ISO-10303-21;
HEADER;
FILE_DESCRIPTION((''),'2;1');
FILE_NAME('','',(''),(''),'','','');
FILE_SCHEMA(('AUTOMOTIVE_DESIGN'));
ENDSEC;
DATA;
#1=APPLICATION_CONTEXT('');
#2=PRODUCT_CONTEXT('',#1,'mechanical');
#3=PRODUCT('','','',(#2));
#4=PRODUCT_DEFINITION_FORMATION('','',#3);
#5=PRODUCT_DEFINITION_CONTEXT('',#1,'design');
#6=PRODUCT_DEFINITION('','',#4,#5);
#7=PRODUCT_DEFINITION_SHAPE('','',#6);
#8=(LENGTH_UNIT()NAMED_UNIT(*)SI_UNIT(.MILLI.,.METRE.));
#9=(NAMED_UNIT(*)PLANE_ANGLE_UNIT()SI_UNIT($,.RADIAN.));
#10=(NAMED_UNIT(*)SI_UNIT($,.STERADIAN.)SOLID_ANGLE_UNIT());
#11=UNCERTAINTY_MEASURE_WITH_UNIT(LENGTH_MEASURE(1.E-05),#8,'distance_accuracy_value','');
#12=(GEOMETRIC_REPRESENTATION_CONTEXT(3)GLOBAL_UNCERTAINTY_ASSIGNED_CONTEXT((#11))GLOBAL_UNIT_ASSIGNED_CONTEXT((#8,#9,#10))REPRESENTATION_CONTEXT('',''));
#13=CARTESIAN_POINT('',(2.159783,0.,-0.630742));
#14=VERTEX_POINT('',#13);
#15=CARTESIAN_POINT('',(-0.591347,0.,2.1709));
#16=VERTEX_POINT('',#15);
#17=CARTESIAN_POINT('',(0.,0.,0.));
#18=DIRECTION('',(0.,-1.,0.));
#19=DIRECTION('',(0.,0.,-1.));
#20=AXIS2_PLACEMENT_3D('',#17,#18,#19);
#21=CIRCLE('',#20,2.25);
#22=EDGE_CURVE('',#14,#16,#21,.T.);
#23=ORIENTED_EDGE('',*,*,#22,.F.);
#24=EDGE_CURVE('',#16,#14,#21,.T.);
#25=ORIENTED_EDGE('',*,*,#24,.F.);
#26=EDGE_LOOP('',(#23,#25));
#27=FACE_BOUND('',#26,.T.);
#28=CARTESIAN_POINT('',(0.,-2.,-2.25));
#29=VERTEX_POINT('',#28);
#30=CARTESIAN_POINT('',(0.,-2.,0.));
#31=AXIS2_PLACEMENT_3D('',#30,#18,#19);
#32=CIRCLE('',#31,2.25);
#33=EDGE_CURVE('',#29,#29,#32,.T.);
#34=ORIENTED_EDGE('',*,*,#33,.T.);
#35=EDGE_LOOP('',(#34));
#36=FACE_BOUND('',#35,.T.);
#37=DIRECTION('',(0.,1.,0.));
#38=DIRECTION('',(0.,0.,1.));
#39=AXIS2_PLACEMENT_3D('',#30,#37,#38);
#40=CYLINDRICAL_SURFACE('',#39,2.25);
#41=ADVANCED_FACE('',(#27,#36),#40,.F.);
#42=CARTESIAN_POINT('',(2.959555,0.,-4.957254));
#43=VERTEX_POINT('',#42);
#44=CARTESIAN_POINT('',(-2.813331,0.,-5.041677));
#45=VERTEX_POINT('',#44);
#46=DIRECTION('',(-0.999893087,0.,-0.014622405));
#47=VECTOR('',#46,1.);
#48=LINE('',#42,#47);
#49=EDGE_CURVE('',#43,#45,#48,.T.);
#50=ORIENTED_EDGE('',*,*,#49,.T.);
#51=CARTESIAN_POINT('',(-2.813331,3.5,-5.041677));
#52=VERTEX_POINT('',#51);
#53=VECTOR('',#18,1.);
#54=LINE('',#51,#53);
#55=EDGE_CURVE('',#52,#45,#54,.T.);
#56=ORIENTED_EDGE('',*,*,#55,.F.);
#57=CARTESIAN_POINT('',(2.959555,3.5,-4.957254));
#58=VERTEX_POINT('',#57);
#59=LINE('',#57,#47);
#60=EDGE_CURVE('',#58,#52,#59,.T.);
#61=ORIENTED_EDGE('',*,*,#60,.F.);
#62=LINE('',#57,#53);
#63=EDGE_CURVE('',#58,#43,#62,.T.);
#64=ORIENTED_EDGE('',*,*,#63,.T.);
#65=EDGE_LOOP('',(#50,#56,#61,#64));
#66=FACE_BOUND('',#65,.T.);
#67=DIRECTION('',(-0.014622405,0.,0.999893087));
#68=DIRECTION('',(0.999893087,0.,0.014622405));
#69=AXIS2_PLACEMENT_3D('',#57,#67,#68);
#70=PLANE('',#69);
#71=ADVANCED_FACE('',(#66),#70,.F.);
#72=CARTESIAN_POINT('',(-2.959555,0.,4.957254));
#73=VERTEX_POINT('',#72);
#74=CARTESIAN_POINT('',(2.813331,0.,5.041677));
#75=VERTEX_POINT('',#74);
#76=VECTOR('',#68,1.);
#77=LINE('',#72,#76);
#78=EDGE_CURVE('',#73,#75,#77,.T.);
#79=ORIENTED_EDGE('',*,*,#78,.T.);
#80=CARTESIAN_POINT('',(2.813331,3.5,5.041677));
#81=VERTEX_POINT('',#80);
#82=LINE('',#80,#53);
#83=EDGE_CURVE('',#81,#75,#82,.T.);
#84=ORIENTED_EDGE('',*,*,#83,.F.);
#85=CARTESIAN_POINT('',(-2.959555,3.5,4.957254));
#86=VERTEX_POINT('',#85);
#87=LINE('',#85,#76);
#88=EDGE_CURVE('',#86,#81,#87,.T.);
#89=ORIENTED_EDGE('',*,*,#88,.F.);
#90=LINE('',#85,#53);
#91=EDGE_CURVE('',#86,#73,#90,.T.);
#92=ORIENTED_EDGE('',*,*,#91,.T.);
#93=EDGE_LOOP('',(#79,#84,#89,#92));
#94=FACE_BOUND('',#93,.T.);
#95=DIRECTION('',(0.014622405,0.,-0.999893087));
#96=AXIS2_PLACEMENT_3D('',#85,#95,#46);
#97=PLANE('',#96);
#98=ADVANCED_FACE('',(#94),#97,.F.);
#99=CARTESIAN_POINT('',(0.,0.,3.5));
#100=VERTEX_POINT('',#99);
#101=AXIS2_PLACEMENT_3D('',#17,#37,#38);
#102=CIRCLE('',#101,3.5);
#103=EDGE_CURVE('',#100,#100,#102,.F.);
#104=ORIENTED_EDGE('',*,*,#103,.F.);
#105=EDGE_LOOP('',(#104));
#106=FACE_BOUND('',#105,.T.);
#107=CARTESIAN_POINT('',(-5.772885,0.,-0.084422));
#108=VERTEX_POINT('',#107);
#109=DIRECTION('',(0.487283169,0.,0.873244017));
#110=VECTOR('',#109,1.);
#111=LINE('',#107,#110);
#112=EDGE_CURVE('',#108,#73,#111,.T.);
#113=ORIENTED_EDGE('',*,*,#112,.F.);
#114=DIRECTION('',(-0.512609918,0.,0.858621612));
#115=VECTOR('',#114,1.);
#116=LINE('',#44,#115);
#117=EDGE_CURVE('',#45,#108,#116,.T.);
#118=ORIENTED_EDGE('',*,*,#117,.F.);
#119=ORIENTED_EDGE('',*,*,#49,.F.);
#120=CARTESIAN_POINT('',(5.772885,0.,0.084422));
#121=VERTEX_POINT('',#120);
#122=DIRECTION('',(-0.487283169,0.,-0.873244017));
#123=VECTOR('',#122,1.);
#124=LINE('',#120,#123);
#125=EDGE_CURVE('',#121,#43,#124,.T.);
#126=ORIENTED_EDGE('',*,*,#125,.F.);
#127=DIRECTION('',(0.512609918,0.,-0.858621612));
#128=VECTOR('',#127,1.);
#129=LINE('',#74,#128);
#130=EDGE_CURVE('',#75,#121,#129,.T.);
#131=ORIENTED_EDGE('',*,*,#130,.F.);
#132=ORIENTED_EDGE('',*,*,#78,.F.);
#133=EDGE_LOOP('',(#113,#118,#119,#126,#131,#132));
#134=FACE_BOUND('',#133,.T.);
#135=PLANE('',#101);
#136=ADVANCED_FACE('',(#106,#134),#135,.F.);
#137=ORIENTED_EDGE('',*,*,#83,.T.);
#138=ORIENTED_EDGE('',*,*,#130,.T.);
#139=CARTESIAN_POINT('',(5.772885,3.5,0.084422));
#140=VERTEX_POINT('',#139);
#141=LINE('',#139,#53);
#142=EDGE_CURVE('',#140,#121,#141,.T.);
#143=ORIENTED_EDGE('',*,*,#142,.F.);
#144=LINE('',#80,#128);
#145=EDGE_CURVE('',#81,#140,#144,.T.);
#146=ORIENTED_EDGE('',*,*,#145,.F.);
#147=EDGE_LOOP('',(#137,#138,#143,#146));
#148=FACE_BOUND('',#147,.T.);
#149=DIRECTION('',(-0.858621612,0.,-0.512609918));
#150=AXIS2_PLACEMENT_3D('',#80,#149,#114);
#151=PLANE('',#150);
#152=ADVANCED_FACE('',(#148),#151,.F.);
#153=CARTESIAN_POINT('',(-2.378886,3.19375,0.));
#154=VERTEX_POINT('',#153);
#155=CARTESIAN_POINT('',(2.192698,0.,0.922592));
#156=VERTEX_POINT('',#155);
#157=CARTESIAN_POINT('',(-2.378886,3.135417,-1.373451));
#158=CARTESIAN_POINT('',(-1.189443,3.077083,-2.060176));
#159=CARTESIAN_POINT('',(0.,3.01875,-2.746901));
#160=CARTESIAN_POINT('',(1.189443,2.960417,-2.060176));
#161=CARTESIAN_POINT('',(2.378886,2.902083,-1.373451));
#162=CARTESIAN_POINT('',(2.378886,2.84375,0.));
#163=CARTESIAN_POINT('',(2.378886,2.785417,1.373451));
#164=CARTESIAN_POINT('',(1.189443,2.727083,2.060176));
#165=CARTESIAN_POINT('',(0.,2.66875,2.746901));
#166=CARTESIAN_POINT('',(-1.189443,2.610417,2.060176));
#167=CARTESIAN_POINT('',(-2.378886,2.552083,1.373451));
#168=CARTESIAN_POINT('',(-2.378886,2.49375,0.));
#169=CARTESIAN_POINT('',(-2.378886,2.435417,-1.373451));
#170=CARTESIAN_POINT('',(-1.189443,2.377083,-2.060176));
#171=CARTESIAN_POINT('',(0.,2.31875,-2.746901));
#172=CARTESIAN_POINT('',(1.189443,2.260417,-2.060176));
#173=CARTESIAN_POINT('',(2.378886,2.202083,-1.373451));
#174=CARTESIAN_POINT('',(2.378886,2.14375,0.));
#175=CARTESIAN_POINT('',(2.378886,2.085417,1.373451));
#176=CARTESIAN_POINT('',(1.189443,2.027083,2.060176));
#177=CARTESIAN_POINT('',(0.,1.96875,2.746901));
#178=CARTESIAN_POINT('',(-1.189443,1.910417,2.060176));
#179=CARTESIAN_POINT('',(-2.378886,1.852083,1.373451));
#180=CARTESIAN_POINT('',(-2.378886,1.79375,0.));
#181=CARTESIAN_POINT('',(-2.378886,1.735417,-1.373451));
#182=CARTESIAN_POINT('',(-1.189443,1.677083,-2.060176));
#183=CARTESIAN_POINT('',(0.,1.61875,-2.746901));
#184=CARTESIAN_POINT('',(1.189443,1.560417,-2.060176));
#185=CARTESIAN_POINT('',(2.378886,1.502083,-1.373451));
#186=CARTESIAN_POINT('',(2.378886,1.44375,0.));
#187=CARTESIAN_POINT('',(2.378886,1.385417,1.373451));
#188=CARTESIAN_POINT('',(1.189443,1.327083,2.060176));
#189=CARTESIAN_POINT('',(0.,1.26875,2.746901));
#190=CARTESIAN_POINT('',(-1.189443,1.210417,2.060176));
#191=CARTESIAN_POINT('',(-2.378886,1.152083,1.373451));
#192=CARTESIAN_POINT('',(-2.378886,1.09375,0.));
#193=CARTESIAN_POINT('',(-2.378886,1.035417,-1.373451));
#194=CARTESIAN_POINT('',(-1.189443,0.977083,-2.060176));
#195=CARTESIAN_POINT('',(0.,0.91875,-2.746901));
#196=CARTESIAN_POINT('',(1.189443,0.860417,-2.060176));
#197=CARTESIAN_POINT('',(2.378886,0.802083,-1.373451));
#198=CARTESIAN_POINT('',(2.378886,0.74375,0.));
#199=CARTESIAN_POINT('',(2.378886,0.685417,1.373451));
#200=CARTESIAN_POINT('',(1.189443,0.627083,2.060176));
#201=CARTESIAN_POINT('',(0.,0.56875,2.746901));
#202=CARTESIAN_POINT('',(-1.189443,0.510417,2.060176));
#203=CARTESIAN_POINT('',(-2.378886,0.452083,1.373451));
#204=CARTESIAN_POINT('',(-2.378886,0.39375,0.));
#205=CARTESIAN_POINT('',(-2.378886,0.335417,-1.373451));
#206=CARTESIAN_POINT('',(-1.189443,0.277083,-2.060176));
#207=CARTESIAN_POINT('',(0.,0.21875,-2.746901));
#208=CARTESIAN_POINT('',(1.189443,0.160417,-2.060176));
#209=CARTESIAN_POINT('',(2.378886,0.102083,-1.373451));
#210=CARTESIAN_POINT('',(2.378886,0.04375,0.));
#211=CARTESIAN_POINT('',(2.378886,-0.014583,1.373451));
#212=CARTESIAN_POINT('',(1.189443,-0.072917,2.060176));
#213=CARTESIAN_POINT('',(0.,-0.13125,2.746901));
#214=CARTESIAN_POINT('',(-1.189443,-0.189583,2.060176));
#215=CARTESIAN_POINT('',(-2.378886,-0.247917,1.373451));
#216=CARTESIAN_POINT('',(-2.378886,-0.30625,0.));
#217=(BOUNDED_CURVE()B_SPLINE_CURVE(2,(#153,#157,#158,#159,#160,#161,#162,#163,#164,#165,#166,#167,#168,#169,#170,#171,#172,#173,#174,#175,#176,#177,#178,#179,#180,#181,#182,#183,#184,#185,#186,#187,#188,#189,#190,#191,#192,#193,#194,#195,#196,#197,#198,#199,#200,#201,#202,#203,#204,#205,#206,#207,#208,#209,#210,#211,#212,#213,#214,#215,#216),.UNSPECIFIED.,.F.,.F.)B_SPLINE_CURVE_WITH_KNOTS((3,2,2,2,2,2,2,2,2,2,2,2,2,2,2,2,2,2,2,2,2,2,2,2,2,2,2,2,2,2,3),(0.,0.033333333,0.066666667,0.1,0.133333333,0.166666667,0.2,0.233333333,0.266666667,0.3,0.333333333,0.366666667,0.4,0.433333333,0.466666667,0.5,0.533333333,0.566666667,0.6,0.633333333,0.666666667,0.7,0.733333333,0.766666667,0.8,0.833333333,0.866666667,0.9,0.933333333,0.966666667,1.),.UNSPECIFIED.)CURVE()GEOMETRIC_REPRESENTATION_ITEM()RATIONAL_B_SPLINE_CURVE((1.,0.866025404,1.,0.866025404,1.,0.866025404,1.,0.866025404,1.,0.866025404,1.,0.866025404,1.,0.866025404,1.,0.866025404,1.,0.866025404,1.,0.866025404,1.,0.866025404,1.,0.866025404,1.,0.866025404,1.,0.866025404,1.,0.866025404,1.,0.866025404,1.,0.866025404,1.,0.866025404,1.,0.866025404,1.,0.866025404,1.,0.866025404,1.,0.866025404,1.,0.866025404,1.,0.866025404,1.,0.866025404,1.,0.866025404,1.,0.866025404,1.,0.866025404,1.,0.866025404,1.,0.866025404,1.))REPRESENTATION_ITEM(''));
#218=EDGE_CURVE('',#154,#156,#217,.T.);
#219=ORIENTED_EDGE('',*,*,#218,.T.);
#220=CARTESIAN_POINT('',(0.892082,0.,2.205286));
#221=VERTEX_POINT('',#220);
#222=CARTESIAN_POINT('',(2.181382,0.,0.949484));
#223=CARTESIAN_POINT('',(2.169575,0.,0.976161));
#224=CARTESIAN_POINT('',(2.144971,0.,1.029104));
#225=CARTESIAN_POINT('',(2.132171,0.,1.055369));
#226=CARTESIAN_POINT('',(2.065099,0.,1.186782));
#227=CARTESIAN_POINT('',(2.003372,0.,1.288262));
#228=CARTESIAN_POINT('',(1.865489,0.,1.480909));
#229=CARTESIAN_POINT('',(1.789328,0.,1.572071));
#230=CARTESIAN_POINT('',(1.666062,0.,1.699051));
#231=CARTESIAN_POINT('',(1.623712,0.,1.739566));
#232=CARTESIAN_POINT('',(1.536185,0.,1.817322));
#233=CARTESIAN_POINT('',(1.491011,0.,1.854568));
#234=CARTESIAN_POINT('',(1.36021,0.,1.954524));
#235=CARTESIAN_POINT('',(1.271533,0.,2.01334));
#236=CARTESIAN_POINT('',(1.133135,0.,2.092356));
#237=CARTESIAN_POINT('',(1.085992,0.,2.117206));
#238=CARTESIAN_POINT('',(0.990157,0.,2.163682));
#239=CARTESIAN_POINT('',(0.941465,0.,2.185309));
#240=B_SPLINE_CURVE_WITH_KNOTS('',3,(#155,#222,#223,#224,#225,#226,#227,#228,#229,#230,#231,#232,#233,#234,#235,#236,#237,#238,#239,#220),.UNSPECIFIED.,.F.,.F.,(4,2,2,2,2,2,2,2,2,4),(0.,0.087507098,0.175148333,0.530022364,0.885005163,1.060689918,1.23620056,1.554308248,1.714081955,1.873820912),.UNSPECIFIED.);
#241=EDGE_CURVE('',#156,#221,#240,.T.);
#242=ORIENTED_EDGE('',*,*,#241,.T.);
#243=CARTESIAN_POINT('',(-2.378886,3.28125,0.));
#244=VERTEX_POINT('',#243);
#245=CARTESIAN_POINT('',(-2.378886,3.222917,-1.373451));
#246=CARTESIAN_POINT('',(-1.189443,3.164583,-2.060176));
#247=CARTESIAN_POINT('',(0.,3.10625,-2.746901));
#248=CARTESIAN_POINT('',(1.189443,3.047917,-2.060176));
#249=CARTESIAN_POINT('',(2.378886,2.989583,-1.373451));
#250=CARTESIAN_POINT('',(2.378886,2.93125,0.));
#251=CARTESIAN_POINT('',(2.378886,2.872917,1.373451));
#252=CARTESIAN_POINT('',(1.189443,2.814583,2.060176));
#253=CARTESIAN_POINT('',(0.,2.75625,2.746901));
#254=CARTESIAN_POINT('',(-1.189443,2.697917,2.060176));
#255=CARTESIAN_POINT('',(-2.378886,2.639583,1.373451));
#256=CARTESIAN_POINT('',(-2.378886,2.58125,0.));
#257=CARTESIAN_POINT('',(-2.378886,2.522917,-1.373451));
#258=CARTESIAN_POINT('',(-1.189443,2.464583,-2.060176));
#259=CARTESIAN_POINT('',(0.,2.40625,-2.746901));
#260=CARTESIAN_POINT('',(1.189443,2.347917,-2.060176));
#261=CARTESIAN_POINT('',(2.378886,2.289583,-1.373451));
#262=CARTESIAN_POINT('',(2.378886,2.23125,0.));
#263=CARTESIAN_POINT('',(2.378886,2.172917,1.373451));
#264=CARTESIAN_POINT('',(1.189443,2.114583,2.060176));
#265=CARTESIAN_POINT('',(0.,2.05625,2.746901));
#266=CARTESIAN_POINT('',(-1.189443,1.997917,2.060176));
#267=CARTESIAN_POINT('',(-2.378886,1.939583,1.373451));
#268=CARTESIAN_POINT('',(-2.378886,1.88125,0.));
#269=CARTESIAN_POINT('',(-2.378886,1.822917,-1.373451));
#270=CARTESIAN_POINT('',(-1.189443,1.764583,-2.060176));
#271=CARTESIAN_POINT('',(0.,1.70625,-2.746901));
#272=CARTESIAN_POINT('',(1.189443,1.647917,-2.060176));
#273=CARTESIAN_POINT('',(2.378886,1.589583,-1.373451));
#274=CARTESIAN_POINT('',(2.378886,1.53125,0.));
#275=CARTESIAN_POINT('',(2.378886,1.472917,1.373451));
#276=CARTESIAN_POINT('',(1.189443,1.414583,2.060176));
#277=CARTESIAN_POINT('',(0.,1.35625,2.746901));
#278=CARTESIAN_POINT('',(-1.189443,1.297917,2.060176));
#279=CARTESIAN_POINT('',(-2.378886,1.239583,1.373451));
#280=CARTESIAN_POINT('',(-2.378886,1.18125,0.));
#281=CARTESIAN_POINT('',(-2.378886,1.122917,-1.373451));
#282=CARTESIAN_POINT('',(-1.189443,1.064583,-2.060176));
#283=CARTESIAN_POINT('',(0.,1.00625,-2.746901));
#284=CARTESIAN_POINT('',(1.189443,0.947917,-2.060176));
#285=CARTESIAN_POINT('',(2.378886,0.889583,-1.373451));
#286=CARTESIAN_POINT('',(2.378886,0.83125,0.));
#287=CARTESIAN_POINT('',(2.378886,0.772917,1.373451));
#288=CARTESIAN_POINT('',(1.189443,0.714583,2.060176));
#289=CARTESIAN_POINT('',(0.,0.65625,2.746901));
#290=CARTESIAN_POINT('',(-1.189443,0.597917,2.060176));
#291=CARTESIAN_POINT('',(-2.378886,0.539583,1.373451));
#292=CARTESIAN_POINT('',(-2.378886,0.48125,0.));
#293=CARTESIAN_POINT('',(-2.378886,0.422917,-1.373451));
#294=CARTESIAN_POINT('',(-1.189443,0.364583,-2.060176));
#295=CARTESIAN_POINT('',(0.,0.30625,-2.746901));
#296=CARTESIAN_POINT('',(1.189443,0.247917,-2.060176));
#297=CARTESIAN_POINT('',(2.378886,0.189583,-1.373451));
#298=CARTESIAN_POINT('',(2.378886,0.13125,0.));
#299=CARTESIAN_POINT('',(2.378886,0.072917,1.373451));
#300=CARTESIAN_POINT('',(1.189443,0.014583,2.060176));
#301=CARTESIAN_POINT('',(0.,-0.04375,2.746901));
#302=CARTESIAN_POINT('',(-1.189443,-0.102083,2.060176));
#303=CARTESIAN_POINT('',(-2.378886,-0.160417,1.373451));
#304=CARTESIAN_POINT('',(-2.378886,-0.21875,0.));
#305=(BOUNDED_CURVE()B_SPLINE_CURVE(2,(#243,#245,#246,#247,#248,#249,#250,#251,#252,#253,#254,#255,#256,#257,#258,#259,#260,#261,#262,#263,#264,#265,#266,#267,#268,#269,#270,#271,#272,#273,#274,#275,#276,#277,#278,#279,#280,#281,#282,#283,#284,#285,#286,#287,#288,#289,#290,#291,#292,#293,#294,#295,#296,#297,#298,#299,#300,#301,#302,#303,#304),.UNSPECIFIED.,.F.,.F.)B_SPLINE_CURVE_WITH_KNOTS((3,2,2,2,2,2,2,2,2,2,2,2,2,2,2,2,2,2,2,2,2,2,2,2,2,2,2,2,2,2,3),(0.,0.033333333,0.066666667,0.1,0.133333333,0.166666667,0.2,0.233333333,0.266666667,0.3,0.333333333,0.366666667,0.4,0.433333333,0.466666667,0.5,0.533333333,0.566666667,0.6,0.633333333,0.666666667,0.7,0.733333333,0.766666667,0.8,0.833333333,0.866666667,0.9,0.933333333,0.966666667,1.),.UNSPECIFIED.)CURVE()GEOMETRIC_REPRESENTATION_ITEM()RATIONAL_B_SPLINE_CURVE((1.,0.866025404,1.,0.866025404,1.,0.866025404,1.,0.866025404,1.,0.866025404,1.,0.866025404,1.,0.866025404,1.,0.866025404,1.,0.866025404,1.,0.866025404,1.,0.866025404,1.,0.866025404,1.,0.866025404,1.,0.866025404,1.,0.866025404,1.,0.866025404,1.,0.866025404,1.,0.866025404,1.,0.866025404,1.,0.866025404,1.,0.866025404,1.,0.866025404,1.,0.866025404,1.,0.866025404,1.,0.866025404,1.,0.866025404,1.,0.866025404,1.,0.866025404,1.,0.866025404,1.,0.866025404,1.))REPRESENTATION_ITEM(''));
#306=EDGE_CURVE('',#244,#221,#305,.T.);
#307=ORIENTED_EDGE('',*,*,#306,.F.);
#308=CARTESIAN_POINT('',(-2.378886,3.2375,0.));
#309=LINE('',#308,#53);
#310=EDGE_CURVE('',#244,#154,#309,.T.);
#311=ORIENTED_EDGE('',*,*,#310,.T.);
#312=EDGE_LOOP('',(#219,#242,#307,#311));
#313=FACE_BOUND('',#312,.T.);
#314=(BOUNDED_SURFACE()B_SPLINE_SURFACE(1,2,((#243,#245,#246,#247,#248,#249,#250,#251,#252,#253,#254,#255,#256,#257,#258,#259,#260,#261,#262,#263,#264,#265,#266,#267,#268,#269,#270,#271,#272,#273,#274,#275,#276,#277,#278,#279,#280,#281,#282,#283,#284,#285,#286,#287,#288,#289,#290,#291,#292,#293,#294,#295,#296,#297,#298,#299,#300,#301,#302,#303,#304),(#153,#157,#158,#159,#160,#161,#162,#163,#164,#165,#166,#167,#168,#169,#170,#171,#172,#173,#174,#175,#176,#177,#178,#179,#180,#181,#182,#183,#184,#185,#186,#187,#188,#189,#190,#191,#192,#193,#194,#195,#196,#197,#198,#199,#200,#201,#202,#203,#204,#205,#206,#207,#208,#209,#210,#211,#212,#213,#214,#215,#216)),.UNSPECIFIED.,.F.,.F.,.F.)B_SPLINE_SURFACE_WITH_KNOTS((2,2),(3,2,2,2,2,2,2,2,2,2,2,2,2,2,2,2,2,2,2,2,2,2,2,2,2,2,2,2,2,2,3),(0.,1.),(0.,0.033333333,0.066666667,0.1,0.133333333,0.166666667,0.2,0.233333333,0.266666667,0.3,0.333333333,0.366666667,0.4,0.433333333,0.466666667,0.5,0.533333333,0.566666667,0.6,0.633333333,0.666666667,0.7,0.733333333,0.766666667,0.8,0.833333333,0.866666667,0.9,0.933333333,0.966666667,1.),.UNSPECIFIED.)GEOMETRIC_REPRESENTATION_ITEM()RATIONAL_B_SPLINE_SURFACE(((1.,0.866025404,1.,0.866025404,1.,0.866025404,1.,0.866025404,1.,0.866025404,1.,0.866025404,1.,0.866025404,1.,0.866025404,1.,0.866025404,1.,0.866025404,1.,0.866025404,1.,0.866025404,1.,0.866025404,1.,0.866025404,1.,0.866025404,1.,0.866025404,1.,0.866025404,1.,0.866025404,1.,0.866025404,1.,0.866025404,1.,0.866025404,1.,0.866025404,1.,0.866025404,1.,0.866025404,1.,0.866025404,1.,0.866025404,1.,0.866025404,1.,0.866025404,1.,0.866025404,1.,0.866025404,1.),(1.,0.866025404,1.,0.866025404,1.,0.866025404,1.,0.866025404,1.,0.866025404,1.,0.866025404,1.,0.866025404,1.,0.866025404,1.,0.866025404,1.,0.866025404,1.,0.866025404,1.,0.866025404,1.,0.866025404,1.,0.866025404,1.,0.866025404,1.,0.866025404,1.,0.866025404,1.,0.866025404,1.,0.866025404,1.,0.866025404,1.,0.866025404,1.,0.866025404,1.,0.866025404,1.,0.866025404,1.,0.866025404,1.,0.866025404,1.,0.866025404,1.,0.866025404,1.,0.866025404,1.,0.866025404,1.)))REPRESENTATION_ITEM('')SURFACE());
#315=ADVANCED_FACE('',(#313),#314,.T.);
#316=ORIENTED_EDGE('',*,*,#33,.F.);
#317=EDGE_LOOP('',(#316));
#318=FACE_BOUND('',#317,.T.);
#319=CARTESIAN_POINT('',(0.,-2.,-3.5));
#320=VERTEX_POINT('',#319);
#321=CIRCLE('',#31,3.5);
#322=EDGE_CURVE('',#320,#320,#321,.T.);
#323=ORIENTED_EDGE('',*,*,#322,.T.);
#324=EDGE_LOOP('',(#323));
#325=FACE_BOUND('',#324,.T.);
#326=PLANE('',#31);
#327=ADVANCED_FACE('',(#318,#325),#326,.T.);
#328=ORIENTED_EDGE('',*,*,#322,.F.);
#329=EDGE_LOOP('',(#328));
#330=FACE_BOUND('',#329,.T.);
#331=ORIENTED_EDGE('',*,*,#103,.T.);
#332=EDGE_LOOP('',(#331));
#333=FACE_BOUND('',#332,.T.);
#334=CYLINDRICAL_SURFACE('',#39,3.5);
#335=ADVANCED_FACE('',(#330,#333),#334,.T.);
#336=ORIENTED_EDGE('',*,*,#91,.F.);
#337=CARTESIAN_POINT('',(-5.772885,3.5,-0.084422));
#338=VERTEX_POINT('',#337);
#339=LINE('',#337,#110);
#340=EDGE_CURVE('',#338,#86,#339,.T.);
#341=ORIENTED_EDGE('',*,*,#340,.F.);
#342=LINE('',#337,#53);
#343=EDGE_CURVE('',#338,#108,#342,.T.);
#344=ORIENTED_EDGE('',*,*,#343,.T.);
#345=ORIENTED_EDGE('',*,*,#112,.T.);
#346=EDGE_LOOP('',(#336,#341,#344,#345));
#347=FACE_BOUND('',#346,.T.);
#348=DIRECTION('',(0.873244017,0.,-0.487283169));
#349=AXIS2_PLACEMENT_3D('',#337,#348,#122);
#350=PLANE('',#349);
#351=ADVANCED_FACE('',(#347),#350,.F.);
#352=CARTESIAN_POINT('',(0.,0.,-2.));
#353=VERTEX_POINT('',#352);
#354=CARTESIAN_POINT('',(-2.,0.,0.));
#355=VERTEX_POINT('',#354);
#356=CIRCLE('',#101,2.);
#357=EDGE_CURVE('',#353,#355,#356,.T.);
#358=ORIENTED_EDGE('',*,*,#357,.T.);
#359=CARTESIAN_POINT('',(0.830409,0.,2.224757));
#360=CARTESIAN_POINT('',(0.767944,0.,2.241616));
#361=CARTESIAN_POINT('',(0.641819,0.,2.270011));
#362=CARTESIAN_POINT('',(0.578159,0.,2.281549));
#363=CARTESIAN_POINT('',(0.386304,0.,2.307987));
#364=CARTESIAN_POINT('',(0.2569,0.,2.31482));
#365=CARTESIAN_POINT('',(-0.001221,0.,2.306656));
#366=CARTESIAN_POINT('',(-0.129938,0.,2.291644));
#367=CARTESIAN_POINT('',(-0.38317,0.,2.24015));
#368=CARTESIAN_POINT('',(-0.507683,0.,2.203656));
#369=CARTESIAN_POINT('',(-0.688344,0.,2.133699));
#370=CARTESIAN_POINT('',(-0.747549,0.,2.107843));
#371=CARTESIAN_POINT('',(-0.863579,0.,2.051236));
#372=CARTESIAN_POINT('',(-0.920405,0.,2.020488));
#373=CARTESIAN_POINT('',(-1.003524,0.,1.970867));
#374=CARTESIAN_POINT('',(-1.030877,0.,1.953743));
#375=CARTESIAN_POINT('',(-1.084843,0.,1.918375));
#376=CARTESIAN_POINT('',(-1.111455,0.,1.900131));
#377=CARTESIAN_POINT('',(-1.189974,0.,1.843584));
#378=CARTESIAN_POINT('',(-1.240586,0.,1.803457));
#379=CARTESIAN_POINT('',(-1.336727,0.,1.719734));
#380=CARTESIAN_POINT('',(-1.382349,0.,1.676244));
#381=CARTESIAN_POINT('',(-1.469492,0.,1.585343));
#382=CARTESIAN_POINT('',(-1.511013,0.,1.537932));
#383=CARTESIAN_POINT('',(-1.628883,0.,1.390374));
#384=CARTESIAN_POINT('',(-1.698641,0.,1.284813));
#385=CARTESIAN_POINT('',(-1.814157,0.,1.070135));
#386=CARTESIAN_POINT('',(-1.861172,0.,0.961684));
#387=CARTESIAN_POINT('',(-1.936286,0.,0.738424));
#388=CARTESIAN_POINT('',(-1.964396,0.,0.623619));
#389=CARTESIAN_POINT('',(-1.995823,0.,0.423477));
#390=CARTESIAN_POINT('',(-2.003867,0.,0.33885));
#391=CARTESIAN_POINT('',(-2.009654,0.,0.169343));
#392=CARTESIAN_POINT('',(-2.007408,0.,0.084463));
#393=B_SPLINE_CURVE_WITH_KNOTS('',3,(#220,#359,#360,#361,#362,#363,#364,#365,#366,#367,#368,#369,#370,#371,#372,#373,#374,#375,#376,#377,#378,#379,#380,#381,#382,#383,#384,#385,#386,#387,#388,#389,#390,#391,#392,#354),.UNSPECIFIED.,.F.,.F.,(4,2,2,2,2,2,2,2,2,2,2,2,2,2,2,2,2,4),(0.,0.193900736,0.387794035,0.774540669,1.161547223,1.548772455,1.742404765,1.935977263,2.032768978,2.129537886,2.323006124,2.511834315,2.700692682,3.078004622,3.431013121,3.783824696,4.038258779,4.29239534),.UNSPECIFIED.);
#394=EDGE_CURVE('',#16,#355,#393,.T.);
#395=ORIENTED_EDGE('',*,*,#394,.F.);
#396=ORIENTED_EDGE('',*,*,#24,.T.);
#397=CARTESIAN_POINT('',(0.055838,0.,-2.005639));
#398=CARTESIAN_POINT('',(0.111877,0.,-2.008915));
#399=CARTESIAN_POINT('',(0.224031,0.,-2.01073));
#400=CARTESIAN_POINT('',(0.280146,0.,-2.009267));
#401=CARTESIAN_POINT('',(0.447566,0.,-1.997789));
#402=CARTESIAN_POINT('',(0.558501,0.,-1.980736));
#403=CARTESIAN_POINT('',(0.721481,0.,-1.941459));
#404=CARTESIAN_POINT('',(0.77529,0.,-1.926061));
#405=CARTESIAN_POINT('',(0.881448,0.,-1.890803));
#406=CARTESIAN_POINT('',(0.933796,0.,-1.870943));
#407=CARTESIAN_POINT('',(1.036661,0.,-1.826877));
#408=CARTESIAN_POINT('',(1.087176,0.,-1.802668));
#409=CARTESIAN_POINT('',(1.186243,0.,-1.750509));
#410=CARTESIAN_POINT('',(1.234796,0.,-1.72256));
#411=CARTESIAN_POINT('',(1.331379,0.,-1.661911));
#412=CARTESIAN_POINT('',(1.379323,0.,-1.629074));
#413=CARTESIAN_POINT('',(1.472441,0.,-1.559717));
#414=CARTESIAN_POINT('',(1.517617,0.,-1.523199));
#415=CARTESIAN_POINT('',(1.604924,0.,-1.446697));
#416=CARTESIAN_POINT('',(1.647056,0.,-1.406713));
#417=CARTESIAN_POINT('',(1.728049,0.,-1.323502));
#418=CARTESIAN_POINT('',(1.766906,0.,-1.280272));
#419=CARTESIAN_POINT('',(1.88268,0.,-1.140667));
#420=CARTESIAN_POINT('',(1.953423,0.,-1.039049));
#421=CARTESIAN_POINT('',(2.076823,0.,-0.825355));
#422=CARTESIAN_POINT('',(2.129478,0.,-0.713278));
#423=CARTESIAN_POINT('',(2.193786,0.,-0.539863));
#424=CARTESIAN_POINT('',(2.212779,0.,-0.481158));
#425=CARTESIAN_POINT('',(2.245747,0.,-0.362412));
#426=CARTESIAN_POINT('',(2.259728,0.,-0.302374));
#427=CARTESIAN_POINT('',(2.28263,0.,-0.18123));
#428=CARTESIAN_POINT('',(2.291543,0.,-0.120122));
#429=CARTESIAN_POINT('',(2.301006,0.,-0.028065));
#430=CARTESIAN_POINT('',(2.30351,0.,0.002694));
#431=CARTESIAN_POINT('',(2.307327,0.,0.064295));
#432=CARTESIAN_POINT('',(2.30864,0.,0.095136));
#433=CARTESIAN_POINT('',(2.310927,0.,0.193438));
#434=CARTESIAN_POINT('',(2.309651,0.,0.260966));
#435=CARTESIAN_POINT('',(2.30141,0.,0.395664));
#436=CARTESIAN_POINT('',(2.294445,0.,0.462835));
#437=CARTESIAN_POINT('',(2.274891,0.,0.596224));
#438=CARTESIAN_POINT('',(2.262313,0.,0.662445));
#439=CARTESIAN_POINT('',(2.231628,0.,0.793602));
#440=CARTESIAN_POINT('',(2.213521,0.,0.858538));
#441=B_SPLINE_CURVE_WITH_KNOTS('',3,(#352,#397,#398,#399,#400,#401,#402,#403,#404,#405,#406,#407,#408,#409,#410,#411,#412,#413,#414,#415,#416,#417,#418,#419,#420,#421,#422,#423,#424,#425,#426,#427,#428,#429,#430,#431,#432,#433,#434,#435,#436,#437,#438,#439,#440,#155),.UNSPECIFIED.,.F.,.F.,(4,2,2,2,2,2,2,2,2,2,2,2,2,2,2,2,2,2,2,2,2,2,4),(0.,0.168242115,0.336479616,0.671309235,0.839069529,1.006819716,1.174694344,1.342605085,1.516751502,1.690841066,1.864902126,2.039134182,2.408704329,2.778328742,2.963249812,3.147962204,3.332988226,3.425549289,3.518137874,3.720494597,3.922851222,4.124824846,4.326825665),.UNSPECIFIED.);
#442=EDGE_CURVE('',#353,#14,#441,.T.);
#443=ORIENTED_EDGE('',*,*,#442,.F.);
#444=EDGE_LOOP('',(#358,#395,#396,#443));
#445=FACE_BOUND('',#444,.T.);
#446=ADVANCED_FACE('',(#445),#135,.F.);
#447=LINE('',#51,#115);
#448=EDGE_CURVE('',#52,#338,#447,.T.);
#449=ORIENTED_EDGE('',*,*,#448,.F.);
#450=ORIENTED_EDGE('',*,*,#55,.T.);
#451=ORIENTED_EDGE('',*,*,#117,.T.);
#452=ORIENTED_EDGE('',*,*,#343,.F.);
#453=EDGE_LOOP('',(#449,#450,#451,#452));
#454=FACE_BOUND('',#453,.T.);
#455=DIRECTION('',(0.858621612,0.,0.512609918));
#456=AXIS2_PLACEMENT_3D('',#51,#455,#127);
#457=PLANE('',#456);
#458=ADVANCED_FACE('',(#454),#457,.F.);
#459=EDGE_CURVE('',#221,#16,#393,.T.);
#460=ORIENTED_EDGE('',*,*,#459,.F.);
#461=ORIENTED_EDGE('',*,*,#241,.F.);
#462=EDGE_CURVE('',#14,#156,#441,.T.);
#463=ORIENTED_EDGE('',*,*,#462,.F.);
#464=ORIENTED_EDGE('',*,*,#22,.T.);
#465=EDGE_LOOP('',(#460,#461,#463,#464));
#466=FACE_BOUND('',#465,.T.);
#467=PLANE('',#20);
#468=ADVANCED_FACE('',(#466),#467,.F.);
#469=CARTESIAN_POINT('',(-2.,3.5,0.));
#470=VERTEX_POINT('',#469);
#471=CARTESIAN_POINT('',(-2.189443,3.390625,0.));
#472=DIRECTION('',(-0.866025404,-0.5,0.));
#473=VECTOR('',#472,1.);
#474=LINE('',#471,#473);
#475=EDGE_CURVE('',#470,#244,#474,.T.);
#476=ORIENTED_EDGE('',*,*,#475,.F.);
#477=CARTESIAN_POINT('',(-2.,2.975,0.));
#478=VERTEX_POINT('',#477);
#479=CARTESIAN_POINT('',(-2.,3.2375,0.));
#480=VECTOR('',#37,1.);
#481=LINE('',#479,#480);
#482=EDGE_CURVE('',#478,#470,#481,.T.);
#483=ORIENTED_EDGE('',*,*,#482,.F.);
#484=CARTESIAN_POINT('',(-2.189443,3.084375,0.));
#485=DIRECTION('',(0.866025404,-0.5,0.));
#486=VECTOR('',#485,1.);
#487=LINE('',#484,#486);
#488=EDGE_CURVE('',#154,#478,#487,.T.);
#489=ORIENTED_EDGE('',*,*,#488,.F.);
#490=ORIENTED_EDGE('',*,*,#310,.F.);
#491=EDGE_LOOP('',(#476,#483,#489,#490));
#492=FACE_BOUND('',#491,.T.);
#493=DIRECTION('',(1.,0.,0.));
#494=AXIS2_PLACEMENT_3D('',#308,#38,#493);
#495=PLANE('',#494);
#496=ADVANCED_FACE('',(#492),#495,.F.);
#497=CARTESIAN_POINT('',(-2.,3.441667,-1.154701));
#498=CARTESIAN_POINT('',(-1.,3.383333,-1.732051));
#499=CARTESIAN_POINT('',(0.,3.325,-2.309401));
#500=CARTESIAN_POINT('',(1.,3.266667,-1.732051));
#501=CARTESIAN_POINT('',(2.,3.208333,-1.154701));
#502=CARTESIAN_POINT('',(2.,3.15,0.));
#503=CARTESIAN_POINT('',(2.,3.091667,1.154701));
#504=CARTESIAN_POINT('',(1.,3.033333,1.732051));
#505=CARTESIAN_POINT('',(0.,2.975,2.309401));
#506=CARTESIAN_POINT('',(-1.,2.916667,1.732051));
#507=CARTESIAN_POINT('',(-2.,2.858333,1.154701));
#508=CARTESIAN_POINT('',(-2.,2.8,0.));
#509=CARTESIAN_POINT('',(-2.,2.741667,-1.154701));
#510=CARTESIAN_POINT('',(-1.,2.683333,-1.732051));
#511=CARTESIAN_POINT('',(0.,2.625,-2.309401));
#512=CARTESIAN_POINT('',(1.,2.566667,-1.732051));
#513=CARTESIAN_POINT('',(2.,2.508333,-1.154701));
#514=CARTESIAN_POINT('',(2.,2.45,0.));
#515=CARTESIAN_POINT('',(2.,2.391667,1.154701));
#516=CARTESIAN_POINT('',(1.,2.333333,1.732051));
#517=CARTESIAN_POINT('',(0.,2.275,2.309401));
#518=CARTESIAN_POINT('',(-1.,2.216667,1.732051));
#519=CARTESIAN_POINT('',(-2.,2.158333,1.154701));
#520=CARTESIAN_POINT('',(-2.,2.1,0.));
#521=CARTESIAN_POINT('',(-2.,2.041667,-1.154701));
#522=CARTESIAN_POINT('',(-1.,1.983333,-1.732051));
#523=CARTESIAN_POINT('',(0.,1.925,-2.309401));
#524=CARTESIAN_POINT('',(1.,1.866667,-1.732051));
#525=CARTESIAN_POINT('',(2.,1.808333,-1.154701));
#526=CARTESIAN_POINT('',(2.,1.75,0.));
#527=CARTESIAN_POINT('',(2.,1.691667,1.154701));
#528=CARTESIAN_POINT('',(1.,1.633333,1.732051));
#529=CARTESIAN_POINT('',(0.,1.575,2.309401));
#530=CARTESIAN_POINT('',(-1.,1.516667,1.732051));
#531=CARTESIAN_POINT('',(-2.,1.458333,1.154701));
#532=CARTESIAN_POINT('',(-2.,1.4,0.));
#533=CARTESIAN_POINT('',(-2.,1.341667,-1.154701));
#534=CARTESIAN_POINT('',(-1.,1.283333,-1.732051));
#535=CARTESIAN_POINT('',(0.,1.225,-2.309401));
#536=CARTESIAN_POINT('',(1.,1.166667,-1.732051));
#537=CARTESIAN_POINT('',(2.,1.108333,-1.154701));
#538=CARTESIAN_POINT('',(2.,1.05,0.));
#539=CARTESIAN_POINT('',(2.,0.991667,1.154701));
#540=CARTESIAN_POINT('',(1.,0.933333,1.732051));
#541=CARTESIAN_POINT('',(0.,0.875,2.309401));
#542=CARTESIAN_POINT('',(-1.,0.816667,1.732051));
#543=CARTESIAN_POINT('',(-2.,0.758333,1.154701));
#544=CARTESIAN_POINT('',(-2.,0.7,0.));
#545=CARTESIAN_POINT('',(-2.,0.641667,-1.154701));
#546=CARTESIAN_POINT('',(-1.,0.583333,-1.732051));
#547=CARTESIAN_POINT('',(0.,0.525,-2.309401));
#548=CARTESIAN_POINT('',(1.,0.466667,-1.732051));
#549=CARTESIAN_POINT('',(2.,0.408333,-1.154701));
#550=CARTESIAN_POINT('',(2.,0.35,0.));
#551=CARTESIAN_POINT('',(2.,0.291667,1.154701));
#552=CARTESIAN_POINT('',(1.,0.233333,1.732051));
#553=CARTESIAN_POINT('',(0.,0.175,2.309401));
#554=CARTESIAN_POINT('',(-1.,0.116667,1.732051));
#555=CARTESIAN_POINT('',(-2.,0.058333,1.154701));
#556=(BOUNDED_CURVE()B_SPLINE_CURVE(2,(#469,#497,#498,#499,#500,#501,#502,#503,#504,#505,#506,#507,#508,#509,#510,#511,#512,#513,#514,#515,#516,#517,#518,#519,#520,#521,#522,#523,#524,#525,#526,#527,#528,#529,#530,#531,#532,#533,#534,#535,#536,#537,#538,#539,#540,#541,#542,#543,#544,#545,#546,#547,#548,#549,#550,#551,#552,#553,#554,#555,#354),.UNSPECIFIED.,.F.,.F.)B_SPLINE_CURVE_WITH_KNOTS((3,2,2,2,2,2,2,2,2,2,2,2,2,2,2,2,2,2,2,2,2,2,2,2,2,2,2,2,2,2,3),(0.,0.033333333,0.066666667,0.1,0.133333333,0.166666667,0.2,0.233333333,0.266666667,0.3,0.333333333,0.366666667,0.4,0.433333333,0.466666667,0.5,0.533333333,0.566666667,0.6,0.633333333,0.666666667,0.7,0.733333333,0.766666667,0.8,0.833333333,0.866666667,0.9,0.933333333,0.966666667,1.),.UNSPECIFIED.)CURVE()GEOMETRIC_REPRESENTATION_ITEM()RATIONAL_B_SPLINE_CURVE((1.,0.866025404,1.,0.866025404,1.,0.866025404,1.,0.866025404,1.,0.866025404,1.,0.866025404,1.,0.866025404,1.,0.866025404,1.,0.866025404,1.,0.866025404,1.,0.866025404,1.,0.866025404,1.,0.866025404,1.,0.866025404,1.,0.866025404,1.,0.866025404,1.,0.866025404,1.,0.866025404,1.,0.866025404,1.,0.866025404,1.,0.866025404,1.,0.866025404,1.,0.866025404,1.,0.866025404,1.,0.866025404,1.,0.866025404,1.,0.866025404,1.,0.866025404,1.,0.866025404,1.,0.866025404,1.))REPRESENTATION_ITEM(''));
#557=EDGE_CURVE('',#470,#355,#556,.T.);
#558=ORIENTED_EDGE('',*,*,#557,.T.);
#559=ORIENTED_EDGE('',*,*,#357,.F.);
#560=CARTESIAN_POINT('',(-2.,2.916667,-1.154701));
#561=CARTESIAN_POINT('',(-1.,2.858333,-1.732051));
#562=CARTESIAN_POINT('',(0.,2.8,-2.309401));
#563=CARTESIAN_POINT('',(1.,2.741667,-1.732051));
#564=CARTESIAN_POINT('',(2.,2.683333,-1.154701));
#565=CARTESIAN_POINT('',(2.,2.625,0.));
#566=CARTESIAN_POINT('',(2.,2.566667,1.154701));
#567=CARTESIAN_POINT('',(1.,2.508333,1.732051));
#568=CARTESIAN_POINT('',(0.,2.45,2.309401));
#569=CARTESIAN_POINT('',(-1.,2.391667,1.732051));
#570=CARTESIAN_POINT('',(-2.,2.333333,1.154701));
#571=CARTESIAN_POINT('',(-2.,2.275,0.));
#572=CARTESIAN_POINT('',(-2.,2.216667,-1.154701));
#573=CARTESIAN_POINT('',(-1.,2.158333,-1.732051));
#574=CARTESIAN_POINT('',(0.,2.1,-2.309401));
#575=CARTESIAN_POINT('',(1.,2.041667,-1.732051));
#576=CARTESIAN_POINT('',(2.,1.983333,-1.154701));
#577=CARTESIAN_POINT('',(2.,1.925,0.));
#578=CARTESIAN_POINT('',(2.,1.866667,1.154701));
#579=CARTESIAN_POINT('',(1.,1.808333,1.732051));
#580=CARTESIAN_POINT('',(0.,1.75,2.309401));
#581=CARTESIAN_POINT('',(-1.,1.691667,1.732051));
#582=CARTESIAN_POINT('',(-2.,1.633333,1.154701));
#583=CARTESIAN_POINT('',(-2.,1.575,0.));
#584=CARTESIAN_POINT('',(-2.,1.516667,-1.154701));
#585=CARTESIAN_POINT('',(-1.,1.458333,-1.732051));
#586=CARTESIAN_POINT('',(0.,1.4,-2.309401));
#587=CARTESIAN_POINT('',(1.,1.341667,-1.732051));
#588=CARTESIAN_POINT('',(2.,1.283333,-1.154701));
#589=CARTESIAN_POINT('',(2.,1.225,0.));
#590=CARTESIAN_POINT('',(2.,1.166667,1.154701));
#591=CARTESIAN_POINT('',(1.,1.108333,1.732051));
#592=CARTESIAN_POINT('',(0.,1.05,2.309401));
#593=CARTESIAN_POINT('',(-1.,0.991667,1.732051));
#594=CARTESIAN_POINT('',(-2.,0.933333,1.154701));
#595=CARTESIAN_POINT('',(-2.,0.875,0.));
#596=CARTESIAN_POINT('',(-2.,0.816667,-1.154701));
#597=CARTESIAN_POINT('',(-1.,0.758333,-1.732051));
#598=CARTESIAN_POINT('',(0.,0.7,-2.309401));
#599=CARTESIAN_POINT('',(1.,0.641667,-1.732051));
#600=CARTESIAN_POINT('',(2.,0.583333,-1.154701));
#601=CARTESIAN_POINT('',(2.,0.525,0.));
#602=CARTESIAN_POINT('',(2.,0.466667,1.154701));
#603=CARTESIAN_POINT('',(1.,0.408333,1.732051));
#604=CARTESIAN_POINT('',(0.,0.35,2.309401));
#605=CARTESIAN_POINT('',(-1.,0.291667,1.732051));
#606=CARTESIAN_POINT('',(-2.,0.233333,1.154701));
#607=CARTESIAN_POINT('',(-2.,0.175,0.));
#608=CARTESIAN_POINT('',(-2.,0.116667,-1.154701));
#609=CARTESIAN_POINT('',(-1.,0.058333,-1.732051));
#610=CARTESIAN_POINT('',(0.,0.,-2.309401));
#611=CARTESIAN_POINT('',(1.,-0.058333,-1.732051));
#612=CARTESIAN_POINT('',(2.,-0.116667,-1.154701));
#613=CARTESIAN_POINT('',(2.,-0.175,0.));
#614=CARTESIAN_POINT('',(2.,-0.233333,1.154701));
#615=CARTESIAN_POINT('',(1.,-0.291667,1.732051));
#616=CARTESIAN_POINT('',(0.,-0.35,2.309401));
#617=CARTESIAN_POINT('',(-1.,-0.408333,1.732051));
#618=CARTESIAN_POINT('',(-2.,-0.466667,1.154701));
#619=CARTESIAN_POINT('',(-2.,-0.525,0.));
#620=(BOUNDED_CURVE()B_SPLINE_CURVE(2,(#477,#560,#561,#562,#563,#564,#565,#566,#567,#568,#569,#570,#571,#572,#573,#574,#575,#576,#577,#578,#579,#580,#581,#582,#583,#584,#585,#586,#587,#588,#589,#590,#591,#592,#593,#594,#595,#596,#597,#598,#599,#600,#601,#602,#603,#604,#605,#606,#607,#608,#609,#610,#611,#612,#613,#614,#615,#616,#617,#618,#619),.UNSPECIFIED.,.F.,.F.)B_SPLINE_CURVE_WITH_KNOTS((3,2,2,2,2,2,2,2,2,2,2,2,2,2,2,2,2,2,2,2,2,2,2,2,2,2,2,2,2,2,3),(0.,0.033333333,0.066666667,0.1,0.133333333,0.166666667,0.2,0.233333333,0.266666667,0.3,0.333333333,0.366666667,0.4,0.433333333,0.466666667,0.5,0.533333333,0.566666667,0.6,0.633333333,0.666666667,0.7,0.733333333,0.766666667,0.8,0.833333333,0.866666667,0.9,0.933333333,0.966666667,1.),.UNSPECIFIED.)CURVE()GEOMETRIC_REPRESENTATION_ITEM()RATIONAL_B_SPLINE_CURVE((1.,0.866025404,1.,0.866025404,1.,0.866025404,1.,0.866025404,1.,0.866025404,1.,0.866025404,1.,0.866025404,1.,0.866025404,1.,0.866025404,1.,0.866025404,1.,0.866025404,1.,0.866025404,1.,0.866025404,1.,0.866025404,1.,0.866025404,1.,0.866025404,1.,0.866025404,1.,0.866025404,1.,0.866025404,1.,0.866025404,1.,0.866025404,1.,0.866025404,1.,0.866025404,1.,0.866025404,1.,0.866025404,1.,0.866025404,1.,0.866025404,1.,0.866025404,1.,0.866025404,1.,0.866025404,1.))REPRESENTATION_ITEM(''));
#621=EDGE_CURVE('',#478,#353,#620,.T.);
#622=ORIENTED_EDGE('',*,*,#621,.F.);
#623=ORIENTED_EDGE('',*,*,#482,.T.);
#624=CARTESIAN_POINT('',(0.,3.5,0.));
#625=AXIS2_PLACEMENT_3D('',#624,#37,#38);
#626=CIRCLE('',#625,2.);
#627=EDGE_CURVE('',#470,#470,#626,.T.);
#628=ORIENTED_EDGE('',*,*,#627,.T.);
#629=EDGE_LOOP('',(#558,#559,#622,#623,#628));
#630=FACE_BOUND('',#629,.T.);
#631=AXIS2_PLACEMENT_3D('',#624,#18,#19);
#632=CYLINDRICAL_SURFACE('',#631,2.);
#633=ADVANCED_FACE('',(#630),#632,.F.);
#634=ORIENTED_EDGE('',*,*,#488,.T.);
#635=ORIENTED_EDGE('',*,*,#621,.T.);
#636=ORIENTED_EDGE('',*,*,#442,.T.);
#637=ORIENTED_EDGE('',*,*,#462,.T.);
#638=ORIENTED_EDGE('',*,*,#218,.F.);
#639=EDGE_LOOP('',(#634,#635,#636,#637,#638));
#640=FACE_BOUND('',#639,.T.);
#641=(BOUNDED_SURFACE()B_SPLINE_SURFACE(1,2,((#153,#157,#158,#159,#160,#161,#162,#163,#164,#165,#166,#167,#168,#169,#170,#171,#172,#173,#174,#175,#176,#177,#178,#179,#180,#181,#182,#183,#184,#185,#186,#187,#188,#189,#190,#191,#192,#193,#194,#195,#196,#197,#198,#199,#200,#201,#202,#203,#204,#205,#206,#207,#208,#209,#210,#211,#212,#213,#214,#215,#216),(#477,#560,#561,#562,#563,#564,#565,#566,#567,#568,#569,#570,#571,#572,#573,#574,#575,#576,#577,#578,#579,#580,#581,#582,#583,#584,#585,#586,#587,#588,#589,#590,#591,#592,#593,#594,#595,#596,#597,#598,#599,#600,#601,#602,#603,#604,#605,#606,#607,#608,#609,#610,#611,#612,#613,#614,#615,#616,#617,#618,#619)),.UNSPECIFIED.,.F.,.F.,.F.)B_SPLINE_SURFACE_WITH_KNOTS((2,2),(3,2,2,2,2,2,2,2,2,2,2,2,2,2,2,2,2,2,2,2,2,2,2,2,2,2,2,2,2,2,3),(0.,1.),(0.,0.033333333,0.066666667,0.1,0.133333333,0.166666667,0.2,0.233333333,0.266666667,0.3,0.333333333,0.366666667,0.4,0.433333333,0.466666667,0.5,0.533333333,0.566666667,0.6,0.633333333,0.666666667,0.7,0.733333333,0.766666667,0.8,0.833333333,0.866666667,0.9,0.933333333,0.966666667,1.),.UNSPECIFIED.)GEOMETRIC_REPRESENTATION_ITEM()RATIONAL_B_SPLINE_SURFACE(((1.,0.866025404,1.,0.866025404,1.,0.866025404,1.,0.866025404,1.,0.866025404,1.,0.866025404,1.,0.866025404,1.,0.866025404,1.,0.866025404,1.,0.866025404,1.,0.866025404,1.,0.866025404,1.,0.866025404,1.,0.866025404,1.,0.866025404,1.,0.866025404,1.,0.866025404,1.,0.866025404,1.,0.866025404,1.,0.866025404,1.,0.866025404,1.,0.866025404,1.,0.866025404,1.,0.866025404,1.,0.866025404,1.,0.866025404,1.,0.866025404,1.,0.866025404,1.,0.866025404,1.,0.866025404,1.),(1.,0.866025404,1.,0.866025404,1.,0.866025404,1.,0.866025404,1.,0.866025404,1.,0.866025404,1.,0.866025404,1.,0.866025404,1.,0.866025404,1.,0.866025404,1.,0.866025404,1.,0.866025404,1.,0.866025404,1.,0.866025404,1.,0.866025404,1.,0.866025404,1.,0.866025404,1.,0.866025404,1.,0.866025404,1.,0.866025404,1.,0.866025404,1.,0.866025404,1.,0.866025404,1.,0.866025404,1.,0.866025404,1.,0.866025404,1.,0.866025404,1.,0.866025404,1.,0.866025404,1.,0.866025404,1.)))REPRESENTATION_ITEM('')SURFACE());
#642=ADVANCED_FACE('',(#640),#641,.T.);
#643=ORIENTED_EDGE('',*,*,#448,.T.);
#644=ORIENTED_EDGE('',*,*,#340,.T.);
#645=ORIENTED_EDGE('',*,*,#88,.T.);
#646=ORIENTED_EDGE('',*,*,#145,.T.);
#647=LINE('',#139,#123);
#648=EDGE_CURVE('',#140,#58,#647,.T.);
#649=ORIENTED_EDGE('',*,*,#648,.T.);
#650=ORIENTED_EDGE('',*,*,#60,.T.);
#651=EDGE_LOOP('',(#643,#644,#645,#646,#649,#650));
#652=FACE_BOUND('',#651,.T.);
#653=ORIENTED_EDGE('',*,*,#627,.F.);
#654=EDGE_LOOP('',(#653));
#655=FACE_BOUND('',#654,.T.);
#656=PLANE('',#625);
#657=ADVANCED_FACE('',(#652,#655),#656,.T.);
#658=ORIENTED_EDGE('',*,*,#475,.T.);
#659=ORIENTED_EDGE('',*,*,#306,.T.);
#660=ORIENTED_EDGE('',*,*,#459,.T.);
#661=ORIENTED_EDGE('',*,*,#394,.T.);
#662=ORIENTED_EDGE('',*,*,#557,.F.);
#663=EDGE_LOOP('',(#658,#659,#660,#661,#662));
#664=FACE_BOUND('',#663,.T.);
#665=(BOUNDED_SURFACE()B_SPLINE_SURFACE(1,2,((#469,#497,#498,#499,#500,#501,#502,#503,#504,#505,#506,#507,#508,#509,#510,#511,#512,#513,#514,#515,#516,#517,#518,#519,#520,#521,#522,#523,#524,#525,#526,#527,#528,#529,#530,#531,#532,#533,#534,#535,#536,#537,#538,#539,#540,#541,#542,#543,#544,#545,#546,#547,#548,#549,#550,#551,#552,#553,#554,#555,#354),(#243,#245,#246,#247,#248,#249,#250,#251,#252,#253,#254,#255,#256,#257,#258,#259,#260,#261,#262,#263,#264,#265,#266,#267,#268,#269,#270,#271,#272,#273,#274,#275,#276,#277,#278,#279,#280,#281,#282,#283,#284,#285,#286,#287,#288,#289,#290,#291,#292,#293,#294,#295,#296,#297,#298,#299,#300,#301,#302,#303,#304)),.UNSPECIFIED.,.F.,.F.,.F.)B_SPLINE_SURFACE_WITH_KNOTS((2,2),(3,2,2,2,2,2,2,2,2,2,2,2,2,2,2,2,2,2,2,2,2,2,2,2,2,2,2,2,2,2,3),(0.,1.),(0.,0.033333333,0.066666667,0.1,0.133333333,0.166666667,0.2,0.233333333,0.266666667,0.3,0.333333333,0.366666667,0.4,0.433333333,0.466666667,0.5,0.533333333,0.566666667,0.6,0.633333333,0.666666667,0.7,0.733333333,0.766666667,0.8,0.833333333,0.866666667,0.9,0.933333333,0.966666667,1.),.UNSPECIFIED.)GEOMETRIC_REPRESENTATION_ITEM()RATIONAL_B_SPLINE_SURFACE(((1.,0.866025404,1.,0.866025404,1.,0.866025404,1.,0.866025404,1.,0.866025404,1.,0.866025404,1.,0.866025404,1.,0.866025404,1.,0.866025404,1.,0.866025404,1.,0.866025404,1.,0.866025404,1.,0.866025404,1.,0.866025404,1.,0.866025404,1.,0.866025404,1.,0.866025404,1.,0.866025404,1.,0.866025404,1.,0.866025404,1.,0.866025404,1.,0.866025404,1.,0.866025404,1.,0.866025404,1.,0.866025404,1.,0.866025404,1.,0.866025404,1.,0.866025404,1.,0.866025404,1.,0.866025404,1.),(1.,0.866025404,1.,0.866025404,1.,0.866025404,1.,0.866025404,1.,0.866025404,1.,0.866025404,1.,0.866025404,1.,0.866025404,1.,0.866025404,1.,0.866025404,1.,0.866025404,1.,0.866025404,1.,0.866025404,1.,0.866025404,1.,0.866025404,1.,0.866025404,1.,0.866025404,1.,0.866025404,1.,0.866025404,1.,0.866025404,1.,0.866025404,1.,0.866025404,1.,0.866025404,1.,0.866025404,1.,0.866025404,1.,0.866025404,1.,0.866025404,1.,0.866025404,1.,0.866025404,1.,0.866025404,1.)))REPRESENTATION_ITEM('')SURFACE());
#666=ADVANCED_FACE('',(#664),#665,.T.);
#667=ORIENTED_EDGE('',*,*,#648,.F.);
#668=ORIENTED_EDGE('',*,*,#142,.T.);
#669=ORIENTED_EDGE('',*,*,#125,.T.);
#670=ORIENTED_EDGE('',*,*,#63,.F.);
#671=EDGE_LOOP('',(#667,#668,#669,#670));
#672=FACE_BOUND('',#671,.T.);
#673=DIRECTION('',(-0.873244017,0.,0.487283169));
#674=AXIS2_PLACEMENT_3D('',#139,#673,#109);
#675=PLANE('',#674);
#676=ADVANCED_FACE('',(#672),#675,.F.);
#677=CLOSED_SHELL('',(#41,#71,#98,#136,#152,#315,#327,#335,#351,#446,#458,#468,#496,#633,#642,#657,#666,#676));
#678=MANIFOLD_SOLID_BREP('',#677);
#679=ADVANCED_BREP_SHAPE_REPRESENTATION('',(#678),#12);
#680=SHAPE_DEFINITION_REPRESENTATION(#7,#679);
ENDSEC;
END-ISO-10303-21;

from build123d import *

# Parameters (mm, degrees)
CROQUIS1_R              = 2
SALIENTE_EXTRUIR1_DEPTH = 3.5
ROSCA1_PITCH            = 0.7
CROQUIS2_R              = 3.5
CROQUIS2_R_2            = 2.25
SALIENTE_EXTRUIR2_DEPTH = 2


with BuildPart() as part:
    # Croquis1 → Saliente-Extruir1 (new body)
    with BuildSketch(Plane(origin=(0, 0, 0), x_dir=(1, 0, 0), z_dir=(0, 1, 0))):
        Polygon((2.959554739, 4.957254188), (-2.81333069, 5.041676682), (-5.772885429, 0.084422494), (-2.959554739, -4.957254188), (2.81333069, -5.041676682), (5.772885429, -0.084422494), align=None)
        with Locations(Location((0, 0, 0), (0, 0, 270))):
            Circle(CROQUIS1_R, mode=Mode.SUBTRACT)
    extrude(amount=SALIENTE_EXTRUIR1_DEPTH)

    # Rosca1: the profile of Perfil de rosca1 profile screwed along a right-hand helix of 5 turns, 6 arcs to a turn; built about Z, then put on its axis
    rosca1_z = Axis((0, 0, 0), (0, 0, 1))
    rosca1_corners = [(1.9997, 0, -0.000173205), (2.378886113, 0, 0.218749999), (2.378886113, 0, 0.306249999), (1.9997, 0, 0.525173203)]
    with BuildLine(mode=Mode.PRIVATE) as rosca1_profile:
        Line(rosca1_corners[0], rosca1_corners[1])
        Line(rosca1_corners[1], rosca1_corners[2])
        Line(rosca1_corners[2], rosca1_corners[3])
        Line(rosca1_corners[3], rosca1_corners[0])
    rosca1_cap = Face(rosca1_profile.wire())
    rosca1_turn_angles = [0, 30, 60, 90, 120, 150, 180, 210, 240, 270, 300, 330, 360]
    rosca1_turn_weights = [1, 0.8660254037844387, 1, 0.8660254037844387, 1, 0.8660254037844387, 1, 0.8660254037844387, 1, 0.8660254037844387, 1, 0.8660254037844387, 1]
    rosca1_turn_rails = [Edge.make_bspline([Vector(p[0], p[1], 0).rotate(rosca1_z, rosca1_turn_angles[k]) / rosca1_turn_weights[k] + Vector(0, 0, p[2] + ROSCA1_PITCH * rosca1_turn_angles[k] / 360) for k in range(13)], [0, 0, 0, 1, 1, 2, 2, 3, 3, 4, 4, 5, 5, 6, 6, 6], 2, rosca1_turn_weights) for p in rosca1_corners]
    rosca1_turn_sides = [Face.make_surface_from_curves(rosca1_turn_rails[p[0]], rosca1_turn_rails[p[1]]) for p in [(0, 1), (1, 2), (2, 3), (3, 0)]]
    rosca1 = Plane(origin=(0, 3.5, 0), x_dir=(-1, 0, 0), z_dir=(0, -1, 0)) * Solid(Shell([*[p.moved(Location((0, 0, ROSCA1_PITCH * i))) for i in range(5) for p in rosca1_turn_sides], rosca1_cap, rosca1_cap.rotate(rosca1_z, 1800).moved(Location((0, 0, ROSCA1_PITCH * 1800 / 360)))]))
    add(rosca1, mode=Mode.SUBTRACT)

    # Croquis2 → Saliente-Extruir2 (add)
    with BuildSketch(Plane.XZ):
        with Locations(Location((0, 0, 0), (0, 0, 90))):
            Circle(CROQUIS2_R)
        with Locations(Location((0, 0, 0), (0, 0, 105.23750757))):
            Circle(CROQUIS2_R_2, mode=Mode.SUBTRACT)
    extrude(amount=SALIENTE_EXTRUIR2_DEPTH)


solid = part.part
